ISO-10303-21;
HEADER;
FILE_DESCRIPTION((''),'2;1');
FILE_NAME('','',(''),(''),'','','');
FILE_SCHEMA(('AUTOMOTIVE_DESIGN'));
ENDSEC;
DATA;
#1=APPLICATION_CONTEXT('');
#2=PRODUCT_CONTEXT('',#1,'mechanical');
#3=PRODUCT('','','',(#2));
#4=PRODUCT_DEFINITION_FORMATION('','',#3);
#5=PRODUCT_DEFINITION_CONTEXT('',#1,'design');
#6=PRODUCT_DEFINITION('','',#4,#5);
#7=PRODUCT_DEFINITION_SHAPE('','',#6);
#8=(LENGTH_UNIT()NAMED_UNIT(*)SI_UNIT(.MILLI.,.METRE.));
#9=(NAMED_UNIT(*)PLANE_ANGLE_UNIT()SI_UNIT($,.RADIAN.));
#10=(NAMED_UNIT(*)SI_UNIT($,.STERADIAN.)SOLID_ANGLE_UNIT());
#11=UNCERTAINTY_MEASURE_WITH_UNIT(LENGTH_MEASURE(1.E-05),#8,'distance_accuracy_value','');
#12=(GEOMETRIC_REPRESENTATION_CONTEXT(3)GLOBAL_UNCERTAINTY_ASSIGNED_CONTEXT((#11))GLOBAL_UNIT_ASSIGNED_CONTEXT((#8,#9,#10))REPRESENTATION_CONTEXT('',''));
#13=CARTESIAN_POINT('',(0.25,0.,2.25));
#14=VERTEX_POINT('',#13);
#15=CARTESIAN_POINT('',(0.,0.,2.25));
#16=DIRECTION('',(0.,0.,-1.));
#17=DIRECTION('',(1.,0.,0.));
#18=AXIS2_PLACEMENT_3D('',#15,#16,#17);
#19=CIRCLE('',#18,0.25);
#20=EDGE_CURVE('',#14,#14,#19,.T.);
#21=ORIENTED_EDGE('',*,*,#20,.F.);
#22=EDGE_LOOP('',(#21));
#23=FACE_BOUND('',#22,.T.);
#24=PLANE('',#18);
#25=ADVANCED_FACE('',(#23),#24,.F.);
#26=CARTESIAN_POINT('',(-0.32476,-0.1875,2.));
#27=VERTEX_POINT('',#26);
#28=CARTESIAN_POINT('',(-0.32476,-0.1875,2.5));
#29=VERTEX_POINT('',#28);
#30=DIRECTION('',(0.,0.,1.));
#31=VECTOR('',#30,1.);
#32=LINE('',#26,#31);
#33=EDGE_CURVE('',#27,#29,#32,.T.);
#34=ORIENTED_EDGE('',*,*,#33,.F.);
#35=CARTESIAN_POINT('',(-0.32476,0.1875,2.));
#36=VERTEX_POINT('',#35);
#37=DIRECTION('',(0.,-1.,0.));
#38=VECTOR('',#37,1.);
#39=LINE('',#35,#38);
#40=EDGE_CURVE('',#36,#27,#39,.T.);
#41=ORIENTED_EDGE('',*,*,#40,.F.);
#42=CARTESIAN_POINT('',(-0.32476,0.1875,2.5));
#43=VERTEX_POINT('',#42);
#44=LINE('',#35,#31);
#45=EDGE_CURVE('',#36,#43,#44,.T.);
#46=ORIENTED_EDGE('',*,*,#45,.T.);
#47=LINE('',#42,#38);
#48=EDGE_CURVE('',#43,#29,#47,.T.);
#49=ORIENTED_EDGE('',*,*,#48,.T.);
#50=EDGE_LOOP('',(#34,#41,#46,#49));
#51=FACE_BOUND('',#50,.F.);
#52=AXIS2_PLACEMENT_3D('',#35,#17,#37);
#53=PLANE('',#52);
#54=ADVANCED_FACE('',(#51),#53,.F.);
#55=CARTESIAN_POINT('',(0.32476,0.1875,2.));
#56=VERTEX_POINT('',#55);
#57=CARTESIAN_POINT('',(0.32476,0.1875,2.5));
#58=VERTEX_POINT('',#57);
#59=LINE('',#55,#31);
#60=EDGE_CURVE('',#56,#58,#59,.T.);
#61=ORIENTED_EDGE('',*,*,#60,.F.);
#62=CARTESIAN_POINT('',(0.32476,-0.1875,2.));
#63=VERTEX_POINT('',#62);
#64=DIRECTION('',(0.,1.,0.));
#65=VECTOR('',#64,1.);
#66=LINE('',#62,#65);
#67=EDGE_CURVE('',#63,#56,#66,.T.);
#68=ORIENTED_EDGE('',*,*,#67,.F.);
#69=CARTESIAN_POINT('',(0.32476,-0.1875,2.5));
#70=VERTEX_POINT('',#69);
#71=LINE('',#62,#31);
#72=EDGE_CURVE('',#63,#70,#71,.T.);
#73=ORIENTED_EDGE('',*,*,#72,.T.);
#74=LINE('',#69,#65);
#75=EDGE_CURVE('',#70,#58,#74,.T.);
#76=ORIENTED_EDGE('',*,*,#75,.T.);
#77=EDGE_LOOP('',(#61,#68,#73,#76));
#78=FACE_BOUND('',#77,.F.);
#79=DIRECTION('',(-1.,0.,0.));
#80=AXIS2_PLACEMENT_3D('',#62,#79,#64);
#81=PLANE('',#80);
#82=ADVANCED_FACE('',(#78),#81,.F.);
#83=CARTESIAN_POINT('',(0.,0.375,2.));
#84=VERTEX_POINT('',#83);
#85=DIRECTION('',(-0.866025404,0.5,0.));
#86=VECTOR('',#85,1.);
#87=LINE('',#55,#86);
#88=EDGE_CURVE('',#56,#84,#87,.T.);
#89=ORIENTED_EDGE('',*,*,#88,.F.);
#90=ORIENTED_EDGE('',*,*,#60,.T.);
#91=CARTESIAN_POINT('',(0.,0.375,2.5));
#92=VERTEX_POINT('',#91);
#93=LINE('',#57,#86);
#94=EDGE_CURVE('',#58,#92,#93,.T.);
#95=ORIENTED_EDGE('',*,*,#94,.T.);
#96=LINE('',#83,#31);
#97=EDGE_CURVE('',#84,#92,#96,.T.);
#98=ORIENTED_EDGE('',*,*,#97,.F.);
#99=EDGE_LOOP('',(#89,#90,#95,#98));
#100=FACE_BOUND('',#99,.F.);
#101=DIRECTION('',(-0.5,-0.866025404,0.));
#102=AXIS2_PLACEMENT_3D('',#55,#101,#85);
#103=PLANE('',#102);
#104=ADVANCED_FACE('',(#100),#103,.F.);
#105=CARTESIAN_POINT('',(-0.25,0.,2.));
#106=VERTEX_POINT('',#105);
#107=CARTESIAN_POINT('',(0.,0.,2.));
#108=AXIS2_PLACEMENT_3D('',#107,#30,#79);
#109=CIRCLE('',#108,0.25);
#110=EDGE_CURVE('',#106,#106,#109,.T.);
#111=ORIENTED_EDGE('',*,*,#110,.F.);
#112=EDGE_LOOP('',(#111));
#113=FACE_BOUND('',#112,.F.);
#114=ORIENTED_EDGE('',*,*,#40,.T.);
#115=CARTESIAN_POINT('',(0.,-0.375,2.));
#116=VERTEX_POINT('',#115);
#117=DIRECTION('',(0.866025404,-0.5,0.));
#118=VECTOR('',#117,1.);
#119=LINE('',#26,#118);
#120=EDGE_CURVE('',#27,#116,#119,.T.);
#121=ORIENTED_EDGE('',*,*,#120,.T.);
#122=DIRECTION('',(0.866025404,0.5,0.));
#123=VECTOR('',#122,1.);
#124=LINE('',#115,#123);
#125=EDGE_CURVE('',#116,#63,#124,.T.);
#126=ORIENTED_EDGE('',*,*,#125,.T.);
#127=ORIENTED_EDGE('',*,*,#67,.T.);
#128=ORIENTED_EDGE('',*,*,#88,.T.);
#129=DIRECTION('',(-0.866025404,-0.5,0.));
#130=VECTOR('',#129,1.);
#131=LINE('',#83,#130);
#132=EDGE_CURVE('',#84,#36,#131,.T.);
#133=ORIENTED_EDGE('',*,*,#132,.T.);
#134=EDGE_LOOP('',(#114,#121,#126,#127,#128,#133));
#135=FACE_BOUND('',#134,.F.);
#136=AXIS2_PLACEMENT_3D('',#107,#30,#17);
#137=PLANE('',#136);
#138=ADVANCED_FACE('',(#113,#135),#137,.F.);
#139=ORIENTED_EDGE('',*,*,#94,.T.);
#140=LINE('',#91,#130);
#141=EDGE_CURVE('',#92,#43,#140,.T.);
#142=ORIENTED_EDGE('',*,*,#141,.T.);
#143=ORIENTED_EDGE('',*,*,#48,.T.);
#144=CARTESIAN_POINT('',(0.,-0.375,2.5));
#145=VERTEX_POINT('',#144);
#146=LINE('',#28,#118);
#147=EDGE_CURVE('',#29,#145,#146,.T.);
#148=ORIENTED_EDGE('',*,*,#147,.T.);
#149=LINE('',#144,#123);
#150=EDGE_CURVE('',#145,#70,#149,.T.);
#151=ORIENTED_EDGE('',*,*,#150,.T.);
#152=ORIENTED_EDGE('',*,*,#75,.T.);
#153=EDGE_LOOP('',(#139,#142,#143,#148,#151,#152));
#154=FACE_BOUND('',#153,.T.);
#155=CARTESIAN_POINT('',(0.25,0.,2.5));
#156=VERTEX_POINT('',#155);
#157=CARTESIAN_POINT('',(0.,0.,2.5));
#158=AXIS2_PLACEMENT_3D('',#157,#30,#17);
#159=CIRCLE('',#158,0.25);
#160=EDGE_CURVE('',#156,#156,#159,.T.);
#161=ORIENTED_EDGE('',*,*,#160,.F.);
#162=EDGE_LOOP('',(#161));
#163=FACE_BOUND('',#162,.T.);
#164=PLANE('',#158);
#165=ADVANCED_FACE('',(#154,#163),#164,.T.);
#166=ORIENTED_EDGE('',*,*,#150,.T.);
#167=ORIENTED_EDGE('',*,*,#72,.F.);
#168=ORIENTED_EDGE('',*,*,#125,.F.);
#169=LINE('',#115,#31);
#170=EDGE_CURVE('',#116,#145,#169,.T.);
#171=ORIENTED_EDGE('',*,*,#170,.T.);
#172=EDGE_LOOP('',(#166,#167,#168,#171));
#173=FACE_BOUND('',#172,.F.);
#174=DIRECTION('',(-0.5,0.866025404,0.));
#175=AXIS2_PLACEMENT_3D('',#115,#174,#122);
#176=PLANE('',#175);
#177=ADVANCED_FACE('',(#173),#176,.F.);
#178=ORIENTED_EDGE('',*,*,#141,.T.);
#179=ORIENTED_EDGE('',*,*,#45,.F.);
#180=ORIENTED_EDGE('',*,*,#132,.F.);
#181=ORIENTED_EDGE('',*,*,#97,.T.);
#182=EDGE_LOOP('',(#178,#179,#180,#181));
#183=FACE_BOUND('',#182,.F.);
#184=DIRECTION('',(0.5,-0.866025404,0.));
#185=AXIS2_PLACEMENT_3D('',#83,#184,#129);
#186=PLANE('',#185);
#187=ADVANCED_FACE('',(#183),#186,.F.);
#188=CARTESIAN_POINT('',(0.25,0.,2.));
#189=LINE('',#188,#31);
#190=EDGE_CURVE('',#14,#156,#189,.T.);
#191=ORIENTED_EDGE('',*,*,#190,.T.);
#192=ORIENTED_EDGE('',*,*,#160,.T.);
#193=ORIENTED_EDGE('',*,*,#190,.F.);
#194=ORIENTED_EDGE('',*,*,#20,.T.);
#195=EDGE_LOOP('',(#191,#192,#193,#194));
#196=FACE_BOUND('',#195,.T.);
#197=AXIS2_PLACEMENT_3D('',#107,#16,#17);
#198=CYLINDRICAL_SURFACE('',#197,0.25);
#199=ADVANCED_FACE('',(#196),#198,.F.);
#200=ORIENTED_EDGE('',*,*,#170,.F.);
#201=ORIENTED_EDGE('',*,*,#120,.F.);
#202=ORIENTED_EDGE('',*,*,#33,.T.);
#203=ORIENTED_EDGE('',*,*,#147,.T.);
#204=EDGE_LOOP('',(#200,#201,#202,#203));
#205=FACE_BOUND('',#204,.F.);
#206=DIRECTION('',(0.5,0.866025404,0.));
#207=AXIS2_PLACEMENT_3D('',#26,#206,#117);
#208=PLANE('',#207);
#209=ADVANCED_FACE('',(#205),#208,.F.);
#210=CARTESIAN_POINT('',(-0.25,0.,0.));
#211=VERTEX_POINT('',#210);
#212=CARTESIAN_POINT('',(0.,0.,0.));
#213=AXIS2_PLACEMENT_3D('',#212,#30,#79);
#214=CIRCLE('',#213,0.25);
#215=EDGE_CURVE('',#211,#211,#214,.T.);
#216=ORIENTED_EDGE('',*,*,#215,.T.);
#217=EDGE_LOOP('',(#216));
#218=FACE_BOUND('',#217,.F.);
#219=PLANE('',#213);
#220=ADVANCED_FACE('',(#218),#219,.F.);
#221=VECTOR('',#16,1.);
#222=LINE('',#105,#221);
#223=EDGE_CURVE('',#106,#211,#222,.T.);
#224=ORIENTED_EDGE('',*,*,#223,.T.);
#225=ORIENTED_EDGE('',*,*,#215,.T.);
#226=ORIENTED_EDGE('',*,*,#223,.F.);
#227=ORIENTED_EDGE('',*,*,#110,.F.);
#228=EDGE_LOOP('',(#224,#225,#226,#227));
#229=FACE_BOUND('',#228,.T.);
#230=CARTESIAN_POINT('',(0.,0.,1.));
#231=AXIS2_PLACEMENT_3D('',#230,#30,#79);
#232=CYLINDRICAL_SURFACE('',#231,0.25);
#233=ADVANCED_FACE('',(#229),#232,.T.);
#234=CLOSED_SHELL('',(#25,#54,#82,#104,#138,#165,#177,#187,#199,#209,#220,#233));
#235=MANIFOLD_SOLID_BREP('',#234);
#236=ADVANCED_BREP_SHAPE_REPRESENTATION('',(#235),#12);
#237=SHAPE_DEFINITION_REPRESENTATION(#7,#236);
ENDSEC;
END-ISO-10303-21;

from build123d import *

# Parameters (mm, degrees)
F0_W     = 0.25
F0_H     = 2
F2_R     = 0.25
F3_DEPTH = 0.5
F4_R     = 0.25
F5_DEPTH = 0.25


# Not quite as in the source:
# - a pattern or mirror of a feature is missing from the dataset's text; its kind, count and spacing are read off the source's solid


with BuildPart() as f1:
    # F0 (on Front) → F1 (revolve)
    with BuildSketch(Plane.XZ):
        with Locations((-0.125, 1)):
            Rectangle(F0_W, F0_H)
    revolve(axis=Axis((0, 0, 1), (0, 0, 1)))

    # F1_copies: F1 across plane


with BuildPart() as f1_1:
    add(f1.part)
    add(f1.part.mirror(Plane.XY.offset(1.125)))

    # F2 (on face) → F3 (join)
    with BuildSketch(Plane.XY.offset(2)):
        Polygon((0.3247595264, 0.1875), (0, 0.375), (-0.3247595264, 0.1875), (-0.3247595264, -0.1875), (0, -0.375), (0.3247595264, -0.1875), align=None)
        Circle(F2_R, mode=Mode.SUBTRACT)
    extrude(amount=F3_DEPTH)

    # F4 (on face) → F5 (cut)
    with BuildSketch(Plane.XY.offset(2.5)):
        Circle(F4_R)
    extrude(amount=-F5_DEPTH, mode=Mode.SUBTRACT)


solid = f1_1.part
